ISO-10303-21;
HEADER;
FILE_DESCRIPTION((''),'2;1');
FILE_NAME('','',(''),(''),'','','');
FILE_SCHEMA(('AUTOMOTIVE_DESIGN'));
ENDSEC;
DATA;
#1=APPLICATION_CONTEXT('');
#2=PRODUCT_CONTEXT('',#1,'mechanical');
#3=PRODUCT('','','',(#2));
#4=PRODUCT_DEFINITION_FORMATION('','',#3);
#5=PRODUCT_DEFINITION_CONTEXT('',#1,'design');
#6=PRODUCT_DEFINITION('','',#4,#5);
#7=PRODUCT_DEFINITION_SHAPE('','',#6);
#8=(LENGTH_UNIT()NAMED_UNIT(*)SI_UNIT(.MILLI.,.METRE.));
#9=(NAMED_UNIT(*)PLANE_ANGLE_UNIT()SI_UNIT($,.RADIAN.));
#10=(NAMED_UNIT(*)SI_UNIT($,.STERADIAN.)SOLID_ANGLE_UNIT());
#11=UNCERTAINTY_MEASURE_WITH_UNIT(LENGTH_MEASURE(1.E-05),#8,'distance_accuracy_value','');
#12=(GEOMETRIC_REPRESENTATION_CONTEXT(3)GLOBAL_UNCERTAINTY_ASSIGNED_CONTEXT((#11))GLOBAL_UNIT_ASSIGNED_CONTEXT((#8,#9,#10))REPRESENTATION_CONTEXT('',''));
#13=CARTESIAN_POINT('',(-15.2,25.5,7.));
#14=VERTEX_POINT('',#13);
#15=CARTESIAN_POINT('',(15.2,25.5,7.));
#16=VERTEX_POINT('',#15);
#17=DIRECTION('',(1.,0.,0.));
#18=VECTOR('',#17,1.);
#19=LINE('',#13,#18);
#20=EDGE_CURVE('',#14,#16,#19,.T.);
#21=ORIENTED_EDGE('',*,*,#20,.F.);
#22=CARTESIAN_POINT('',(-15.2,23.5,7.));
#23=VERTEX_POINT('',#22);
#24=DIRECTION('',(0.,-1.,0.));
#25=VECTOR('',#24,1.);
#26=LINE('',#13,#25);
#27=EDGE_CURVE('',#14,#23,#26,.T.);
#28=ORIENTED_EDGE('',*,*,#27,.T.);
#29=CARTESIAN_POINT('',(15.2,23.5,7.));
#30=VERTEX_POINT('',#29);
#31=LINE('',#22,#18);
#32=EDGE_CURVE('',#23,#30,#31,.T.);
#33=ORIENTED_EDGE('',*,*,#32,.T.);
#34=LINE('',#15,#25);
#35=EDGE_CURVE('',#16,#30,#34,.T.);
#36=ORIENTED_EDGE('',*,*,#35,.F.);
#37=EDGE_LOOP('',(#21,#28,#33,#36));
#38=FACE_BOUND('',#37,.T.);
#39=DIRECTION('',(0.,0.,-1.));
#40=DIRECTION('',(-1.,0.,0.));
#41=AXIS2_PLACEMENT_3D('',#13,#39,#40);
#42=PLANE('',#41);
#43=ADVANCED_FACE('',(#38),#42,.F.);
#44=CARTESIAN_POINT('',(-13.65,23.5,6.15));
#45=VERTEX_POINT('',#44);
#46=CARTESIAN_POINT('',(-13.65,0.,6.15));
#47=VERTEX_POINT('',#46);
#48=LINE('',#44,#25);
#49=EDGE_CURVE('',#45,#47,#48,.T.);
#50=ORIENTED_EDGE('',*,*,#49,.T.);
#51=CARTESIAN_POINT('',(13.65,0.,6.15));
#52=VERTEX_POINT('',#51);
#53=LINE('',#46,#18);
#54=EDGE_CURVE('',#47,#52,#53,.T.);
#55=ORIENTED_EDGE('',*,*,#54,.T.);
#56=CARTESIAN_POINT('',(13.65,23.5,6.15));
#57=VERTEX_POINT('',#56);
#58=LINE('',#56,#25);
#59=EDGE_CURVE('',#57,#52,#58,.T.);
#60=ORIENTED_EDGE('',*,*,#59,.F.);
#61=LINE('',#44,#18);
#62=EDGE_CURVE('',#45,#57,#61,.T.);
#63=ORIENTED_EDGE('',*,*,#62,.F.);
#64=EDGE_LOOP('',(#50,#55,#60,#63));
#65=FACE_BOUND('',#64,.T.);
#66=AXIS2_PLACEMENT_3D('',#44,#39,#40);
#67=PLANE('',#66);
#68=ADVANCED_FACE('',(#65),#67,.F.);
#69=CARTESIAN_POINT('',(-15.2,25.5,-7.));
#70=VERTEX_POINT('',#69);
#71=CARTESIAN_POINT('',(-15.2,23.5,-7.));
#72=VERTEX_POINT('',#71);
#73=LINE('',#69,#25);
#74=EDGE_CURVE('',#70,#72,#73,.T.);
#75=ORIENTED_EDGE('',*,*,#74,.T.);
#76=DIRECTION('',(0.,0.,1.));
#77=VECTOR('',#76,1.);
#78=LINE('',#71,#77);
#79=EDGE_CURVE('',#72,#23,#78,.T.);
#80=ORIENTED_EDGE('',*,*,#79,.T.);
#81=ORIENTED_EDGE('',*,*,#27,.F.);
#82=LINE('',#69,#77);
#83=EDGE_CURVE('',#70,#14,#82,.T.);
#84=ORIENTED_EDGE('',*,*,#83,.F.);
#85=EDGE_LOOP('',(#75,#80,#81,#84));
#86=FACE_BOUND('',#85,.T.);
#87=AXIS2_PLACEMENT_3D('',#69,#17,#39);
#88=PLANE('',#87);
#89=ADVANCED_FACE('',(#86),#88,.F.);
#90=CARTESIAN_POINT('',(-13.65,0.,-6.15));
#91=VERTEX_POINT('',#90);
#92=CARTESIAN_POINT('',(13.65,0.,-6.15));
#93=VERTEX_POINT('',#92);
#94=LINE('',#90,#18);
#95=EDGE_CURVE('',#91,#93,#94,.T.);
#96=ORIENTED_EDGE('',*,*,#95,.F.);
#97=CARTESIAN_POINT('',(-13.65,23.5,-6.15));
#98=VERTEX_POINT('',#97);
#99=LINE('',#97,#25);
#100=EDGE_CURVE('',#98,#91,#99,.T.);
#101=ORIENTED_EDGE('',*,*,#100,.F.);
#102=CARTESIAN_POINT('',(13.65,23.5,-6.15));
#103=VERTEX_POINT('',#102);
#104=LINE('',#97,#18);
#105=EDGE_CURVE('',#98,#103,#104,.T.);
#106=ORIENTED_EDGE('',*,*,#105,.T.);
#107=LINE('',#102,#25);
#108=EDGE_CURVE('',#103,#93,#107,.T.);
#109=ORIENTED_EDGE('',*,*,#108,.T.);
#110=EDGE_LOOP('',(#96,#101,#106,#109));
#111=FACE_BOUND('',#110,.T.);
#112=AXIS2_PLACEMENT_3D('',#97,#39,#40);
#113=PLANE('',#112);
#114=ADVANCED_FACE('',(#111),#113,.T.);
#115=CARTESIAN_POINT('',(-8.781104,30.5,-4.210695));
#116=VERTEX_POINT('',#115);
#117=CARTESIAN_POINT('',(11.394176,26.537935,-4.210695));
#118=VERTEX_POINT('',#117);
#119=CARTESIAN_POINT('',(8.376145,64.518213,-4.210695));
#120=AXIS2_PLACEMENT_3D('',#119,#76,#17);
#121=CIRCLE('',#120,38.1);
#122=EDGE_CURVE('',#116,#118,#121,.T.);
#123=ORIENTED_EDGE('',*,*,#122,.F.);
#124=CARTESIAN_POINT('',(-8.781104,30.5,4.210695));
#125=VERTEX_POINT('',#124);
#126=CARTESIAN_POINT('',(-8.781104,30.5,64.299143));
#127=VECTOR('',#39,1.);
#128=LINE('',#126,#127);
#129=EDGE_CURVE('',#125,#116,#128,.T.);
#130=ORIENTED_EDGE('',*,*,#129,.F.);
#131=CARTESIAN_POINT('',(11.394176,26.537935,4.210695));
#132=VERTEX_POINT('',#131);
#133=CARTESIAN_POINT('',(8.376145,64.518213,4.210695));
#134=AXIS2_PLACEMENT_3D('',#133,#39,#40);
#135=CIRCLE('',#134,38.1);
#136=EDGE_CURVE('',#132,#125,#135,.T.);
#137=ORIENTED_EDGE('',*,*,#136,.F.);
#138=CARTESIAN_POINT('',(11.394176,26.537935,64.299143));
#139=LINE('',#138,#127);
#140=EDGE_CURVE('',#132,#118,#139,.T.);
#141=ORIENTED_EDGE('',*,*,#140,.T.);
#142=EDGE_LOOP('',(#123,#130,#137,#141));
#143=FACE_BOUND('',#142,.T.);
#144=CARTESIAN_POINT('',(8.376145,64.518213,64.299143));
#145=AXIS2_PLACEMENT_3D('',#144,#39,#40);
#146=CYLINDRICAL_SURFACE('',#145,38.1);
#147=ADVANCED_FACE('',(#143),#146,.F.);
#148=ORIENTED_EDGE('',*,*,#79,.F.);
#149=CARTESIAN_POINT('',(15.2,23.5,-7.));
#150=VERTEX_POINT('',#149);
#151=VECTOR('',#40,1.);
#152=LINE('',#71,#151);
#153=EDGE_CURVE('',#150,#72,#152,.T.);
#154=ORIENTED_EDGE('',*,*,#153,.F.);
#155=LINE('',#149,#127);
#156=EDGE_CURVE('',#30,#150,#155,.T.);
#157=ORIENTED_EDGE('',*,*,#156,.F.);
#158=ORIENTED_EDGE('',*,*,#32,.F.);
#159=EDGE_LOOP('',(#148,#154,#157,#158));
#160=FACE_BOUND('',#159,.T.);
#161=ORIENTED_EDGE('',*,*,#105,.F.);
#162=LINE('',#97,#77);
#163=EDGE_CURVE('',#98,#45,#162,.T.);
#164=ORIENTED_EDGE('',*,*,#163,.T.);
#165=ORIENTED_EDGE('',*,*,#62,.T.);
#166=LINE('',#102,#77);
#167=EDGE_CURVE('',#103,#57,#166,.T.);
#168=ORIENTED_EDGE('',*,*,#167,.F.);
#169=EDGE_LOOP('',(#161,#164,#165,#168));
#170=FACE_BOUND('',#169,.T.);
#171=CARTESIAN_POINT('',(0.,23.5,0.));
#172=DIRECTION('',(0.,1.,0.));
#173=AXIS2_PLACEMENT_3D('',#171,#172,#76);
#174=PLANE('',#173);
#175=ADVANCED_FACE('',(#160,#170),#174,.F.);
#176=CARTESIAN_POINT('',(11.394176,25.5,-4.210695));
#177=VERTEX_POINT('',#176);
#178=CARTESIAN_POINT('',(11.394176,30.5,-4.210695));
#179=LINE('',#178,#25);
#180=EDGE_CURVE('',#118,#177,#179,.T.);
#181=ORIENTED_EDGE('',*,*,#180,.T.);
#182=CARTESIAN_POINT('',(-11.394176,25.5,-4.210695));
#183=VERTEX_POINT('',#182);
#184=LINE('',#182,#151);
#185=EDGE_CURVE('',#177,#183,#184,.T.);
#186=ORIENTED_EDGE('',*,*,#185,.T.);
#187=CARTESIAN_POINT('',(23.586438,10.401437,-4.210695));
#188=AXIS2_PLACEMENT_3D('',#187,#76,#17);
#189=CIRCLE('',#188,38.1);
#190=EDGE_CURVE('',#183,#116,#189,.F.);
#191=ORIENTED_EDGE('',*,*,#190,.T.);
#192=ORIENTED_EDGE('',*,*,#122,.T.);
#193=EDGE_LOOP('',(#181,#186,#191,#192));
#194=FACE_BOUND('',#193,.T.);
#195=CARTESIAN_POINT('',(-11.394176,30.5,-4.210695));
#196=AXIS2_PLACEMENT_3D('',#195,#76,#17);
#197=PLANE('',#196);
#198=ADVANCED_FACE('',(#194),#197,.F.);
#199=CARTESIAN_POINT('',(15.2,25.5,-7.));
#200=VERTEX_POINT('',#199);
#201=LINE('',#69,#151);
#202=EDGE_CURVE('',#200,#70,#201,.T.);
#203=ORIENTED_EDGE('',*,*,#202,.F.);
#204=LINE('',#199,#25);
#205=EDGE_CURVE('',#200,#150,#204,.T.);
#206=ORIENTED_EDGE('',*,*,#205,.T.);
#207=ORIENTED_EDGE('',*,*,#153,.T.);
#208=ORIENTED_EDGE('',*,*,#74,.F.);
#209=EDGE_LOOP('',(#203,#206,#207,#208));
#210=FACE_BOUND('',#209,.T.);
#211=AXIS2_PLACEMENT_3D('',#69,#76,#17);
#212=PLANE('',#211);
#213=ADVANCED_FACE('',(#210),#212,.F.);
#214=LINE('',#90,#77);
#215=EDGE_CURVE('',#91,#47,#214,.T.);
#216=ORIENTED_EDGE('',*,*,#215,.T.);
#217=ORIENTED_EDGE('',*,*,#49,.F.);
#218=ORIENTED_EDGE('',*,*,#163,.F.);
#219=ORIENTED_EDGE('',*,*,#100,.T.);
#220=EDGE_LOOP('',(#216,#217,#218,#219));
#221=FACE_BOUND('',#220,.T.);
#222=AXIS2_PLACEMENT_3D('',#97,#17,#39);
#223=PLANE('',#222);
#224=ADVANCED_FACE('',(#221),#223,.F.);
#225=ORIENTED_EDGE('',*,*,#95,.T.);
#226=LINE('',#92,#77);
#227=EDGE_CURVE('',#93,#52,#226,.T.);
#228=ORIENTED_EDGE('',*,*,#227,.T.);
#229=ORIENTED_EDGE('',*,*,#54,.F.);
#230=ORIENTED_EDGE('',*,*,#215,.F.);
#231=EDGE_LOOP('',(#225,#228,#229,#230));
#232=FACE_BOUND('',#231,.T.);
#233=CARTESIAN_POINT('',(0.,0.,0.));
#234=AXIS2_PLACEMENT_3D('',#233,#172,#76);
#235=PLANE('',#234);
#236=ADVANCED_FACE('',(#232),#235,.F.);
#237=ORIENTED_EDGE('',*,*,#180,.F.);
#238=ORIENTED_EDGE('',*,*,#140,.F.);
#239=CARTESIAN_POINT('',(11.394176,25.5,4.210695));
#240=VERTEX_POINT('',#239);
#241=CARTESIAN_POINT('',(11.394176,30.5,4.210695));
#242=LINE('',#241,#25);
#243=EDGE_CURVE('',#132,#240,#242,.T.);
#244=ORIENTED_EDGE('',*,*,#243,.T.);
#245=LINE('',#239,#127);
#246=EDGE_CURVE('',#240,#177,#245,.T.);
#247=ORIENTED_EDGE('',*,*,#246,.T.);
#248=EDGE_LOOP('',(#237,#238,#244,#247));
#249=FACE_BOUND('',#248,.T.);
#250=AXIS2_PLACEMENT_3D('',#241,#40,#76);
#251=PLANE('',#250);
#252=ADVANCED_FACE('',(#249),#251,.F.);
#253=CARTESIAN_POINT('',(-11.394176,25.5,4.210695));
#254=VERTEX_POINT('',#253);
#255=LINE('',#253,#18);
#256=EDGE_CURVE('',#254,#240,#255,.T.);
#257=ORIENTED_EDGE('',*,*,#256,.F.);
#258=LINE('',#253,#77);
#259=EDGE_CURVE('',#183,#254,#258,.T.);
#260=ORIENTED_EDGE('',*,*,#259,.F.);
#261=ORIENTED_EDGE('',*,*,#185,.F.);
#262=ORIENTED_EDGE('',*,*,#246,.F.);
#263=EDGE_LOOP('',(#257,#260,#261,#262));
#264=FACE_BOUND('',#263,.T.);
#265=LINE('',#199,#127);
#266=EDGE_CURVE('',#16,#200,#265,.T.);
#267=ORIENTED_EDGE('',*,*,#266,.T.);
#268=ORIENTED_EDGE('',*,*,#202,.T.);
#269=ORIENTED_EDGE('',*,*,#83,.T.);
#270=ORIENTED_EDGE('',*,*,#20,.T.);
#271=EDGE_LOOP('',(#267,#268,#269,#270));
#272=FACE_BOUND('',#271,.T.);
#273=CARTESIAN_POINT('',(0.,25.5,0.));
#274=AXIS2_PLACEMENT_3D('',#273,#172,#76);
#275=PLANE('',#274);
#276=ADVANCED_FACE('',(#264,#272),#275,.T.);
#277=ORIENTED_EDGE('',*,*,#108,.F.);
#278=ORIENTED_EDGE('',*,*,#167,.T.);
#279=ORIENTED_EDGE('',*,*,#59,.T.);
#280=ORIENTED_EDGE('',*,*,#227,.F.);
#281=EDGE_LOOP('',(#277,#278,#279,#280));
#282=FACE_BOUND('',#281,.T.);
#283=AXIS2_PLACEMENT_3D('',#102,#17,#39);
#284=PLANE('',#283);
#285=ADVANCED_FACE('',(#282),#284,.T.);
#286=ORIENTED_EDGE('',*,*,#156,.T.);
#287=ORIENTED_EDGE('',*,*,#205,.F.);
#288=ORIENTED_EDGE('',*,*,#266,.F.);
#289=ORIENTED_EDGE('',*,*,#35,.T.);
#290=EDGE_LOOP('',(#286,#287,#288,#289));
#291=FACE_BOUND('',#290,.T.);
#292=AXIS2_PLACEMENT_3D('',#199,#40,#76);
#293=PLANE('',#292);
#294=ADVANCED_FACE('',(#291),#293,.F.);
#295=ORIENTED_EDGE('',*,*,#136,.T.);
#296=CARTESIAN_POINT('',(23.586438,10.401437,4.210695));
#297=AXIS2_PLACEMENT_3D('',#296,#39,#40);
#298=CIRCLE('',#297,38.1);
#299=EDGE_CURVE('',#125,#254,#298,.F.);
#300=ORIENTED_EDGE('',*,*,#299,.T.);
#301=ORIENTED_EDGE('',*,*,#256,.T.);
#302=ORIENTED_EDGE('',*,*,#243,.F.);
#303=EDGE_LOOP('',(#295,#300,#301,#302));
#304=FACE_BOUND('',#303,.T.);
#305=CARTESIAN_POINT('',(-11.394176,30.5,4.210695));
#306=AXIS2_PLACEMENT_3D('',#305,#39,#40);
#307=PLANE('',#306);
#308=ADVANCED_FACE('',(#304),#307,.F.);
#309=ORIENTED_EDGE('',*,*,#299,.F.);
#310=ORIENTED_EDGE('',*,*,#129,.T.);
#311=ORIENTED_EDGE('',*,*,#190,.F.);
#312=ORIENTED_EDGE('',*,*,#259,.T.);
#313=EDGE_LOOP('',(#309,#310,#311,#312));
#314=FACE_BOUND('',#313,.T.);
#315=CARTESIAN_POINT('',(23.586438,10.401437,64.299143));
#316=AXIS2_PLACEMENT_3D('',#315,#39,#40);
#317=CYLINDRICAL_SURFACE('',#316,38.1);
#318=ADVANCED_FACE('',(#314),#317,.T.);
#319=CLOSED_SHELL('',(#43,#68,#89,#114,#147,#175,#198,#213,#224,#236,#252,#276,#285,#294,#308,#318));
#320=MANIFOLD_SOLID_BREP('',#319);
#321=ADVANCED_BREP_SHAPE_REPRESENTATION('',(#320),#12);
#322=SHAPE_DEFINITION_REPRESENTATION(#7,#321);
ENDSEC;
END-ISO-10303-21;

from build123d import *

# Parameters (mm, degrees)
SKETCH1_W           = 27.3
SKETCH1_H           = 12.3
BOSS_EXTRUDE1_DEPTH = 23.5
SKETCH3_W           = 30.4
SKETCH3_H           = 14
BOSS_EXTRUDE2_DEPTH = 2
SKETCH4_W           = 22.788352984
SKETCH4_H           = 8.421389372
BOSS_EXTRUDE3_DEPTH = 5
CUT_EXTRUDE2_START  = -8.421389371
CUT_EXTRUDE2_DEPTH  = 8.421389371


# Read off the part's stored shape, not the designer's step: Cut-Extrude2
with BuildPart() as part:
    # Sketch1 → Boss-Extrude1 (new body)
    with BuildSketch(Plane(origin=(0, 0, 0), x_dir=(1, 0, 0), z_dir=(0, 1, 0))):
        Rectangle(SKETCH1_W, SKETCH1_H)
    extrude(amount=BOSS_EXTRUDE1_DEPTH)

    # Sketch3 → Boss-Extrude2 (add)
    with BuildSketch(Plane(origin=(0, 23.5, 0), x_dir=(1, 0, 0), z_dir=(0, 1, 0))):
        Rectangle(SKETCH3_W, SKETCH3_H)
    extrude(amount=BOSS_EXTRUDE2_DEPTH)

    # Sketch4 → Boss-Extrude3 (add)
    with BuildSketch(Plane(origin=(0, 25.5, 0), x_dir=(1, 0, 0), z_dir=(0, 1, 0))):
        Rectangle(SKETCH4_W, SKETCH4_H)
    extrude(amount=BOSS_EXTRUDE3_DEPTH)

    # Cut-Extrude2 outline → Cut-Extrude2 (cut)
    with BuildSketch(Plane.XY.offset(4.210694686).offset(CUT_EXTRUDE2_START)):
        with BuildLine():
            ThreePointArc((-11.394176492, 25.5), (-10.180313992, 28.04843269), (-8.781103834, 30.5))
            Line((-8.781103834, 30.5), (-11.394176492, 30.5))
            Line((-11.394176492, 30.5), (-11.394176492, 25.5))
        make_face()
        with BuildLine():
            ThreePointArc((-8.781103834, 30.5), (1.034220457, 27.1323045), (11.394176492, 26.537935189))
            Line((11.394176492, 26.537935189), (11.394176492, 30.5))
            Line((11.394176492, 30.5), (-8.781103834, 30.5))
        make_face()
    extrude(amount=CUT_EXTRUDE2_DEPTH, mode=Mode.SUBTRACT)


solid = part.part
